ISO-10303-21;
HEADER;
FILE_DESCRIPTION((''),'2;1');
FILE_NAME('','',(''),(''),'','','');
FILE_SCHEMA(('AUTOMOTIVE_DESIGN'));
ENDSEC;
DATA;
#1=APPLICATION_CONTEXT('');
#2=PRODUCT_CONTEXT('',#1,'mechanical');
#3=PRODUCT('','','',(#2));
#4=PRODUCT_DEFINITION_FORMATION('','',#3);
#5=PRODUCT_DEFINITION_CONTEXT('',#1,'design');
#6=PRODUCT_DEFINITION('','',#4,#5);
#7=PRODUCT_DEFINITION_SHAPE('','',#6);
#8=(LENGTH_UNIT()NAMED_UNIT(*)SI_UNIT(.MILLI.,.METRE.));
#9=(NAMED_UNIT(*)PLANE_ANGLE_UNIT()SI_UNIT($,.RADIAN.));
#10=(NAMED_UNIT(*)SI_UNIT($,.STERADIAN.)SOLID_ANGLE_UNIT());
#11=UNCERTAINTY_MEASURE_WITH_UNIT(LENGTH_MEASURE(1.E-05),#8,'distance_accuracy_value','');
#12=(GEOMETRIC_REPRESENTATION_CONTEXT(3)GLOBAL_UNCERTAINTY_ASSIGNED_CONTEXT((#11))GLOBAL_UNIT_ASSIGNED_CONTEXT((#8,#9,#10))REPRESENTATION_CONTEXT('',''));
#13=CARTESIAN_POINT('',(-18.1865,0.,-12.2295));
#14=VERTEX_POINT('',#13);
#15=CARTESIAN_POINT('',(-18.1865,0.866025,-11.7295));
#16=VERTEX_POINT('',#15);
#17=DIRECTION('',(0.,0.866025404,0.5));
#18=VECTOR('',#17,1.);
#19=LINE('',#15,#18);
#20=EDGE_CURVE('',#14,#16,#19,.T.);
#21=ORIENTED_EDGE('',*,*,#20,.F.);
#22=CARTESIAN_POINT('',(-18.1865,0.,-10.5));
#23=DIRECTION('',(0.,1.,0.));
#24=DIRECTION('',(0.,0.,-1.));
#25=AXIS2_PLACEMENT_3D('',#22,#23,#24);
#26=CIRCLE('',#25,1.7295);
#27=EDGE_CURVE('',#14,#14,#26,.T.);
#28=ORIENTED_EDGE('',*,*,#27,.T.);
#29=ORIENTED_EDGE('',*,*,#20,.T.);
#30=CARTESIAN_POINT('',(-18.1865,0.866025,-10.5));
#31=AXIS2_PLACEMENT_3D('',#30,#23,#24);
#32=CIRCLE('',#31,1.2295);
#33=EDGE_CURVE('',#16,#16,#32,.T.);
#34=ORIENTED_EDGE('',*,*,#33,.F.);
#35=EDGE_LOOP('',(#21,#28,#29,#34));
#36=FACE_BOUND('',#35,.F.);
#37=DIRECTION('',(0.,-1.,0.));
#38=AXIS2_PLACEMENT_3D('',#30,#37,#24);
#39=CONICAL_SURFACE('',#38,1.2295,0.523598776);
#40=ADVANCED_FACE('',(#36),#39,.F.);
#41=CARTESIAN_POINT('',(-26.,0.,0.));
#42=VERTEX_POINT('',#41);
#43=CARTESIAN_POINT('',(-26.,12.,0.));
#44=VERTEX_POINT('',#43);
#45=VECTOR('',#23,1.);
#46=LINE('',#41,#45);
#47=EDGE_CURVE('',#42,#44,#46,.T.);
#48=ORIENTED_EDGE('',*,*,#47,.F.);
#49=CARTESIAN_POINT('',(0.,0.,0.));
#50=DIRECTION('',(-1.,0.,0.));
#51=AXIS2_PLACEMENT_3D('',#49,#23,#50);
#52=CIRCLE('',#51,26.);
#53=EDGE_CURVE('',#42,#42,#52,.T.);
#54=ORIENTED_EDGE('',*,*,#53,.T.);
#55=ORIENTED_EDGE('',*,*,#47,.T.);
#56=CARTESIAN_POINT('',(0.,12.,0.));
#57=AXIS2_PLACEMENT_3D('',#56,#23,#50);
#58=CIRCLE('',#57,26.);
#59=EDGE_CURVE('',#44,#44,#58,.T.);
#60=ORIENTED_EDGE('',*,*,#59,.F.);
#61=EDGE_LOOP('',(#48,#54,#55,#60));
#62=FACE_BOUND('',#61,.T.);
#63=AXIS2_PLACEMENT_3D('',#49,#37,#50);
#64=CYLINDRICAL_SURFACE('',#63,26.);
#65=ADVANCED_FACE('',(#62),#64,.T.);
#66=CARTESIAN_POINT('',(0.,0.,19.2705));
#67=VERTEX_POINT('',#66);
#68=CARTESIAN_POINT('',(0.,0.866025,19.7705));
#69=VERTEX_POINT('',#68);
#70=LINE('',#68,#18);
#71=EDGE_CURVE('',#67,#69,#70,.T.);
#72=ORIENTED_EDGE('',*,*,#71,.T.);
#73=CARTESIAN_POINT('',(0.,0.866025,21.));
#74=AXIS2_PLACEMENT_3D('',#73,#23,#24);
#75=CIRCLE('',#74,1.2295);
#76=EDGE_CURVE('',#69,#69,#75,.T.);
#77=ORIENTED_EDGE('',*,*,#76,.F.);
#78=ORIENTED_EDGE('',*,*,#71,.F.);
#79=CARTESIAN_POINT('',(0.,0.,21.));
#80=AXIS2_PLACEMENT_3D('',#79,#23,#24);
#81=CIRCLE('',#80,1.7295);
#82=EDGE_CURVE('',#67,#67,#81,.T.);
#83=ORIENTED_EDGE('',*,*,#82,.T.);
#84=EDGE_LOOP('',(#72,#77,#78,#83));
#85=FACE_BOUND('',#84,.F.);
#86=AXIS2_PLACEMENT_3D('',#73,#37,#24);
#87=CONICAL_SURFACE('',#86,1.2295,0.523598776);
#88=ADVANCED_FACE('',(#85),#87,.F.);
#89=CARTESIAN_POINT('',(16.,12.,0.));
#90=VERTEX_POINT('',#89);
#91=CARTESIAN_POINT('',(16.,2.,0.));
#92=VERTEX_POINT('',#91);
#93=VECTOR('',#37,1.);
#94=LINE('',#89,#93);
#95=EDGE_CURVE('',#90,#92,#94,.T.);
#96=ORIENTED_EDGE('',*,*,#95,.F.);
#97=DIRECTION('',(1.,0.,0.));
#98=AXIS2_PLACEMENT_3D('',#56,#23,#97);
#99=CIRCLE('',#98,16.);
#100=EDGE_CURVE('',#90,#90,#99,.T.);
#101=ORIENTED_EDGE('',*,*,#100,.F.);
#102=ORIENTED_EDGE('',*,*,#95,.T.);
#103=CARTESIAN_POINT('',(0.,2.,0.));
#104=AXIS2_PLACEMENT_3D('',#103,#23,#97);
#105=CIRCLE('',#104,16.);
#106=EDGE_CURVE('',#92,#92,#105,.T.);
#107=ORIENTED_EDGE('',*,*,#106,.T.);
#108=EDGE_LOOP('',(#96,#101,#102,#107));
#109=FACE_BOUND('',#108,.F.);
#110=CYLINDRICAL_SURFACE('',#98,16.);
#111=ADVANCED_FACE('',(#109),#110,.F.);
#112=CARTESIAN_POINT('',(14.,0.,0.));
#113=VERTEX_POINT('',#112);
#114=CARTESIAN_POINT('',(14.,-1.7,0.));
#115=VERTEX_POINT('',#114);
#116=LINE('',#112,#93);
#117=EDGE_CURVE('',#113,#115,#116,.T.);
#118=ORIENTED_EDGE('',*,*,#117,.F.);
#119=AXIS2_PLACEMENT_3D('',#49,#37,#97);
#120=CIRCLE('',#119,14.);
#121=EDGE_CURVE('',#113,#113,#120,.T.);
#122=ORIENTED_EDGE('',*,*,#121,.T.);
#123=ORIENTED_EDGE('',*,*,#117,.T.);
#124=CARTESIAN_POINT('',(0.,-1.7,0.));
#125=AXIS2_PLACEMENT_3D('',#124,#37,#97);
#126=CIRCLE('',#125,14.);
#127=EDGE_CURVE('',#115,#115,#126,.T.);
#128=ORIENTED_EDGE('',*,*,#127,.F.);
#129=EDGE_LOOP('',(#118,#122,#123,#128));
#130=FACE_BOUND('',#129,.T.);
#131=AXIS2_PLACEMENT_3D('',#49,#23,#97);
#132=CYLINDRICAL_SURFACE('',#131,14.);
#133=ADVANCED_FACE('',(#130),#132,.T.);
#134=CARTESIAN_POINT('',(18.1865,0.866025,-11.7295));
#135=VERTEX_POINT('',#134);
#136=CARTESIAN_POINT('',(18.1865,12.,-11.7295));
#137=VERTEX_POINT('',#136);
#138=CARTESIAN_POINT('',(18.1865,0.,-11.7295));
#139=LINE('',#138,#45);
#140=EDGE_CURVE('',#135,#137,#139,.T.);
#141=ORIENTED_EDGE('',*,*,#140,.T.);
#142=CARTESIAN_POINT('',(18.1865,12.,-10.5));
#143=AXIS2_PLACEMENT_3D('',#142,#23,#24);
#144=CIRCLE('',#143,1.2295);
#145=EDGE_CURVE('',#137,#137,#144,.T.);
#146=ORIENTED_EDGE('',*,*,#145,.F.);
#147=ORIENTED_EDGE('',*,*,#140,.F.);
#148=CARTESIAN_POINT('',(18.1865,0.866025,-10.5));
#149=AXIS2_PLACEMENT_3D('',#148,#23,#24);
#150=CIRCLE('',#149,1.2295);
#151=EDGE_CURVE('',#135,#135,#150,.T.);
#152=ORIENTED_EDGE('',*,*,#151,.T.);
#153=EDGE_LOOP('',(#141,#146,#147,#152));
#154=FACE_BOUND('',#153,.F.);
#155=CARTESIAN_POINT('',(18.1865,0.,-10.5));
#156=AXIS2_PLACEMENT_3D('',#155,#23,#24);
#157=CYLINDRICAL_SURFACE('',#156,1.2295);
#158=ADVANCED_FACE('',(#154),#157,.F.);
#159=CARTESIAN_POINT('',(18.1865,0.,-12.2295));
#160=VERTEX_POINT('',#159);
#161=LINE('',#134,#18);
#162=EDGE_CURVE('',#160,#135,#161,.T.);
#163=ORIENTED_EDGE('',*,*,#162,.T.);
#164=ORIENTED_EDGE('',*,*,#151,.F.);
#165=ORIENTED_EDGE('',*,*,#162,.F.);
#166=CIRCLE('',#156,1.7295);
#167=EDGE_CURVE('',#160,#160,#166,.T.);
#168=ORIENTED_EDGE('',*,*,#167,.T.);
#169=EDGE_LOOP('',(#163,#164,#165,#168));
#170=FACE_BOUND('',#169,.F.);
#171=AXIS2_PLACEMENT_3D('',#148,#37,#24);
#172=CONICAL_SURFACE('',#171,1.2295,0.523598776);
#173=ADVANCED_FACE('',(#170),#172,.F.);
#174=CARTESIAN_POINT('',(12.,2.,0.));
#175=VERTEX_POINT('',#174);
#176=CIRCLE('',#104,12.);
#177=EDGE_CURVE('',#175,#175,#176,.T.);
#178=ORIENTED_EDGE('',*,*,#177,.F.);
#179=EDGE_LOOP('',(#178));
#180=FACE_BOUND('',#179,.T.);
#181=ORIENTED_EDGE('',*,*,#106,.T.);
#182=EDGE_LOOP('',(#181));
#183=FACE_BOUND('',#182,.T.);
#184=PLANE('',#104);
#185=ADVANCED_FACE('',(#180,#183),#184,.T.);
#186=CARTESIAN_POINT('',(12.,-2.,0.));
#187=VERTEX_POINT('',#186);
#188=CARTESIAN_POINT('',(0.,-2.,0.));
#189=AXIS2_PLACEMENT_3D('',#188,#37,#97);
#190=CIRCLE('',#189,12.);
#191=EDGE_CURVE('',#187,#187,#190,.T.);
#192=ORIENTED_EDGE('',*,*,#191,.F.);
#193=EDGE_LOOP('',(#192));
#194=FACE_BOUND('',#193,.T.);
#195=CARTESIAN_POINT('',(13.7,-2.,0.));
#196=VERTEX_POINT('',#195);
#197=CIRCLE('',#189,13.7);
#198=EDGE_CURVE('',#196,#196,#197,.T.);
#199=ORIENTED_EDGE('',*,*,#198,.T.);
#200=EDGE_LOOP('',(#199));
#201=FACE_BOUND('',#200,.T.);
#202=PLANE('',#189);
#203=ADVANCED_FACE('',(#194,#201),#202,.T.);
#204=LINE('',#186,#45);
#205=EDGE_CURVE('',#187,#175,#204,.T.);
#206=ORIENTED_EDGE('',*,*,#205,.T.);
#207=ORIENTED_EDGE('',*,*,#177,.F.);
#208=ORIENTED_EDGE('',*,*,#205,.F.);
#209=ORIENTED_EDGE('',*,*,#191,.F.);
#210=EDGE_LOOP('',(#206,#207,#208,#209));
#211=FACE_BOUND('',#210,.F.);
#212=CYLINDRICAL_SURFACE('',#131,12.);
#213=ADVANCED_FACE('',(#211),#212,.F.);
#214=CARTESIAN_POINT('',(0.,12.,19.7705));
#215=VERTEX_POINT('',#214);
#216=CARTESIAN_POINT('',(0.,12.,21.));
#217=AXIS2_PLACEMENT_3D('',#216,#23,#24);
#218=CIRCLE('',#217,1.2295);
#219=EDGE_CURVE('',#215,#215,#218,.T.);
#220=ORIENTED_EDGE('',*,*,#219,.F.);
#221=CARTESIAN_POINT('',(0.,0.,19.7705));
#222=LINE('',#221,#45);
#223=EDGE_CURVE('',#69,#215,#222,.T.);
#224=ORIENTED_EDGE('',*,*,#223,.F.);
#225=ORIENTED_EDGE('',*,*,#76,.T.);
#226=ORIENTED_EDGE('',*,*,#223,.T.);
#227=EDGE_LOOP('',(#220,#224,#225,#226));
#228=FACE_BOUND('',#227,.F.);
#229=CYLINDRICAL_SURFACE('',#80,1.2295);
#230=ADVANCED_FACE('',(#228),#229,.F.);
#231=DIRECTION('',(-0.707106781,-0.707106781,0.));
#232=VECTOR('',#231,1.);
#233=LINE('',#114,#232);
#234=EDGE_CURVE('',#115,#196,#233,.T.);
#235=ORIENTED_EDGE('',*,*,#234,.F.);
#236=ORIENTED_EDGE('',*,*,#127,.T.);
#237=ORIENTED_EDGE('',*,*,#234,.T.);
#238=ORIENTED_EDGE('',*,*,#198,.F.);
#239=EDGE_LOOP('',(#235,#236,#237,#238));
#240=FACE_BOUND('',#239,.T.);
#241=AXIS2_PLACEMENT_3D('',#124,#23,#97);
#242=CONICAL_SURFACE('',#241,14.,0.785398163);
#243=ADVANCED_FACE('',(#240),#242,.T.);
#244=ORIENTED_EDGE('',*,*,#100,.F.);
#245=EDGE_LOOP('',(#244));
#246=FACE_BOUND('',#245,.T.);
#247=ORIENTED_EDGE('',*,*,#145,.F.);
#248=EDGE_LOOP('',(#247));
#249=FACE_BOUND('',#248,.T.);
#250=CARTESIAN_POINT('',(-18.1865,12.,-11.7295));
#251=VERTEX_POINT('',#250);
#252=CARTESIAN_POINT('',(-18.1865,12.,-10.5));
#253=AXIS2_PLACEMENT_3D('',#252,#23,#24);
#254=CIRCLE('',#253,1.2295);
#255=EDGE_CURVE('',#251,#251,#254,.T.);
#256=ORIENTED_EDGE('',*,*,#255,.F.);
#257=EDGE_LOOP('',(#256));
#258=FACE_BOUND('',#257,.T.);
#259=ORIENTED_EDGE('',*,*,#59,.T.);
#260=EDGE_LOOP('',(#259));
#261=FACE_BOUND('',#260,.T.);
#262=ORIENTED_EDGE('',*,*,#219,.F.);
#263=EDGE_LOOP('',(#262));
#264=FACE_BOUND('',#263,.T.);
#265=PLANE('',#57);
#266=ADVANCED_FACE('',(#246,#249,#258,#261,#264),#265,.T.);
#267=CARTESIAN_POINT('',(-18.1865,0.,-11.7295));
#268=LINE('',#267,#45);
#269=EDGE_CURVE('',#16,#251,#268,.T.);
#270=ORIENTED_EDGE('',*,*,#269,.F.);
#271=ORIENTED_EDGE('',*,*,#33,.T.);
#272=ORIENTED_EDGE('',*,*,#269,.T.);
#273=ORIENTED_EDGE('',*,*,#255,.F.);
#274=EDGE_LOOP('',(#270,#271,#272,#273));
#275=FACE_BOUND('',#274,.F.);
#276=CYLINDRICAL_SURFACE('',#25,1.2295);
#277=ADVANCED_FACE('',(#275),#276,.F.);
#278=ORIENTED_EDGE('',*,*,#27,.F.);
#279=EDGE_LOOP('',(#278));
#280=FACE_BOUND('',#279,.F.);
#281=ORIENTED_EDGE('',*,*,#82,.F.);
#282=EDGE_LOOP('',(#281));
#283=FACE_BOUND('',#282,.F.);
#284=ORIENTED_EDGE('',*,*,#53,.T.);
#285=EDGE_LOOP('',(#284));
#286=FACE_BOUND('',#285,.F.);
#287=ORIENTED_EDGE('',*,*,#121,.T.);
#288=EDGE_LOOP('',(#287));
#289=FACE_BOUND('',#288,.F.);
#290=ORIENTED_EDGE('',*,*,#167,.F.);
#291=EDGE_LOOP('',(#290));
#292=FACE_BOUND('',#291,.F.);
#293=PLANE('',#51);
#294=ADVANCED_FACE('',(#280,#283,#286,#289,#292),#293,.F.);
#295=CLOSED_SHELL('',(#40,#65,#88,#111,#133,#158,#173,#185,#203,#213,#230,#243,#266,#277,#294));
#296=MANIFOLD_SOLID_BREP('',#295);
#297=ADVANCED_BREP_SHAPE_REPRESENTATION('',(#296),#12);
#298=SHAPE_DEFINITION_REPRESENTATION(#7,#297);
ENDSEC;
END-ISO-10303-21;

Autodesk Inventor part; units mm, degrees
ref_plane "YZ Plane" through (0, 0, 0) normal (1, 0, 0) x (0, 1, 0)
ref_plane "XZ Plane" through (0, 0, 0) normal (0, 1, 0) x (-1, 0, 0)
ref_plane "XY Plane" through (0, 0, 0) normal (0, 0, 1) x (1, 0, 0)
sketch "Sketch1" plane through (0, 0, 0) normal (0, 1, 0) x (-1, 0, 0)
  circle A0 centre (0, 0) radius 26
  dimension "d0" = 52
extrude "Extrusion1" add sketch "Sketch1" along normal blind 12
sketch "Sketch2" plane through (0, 12, 0) normal (0, 1, 0) x (1, 0, 0)
  circle A0 centre (0, 0) radius 16
  dimension "d3" = 32
extrude "Extrusion2" cut sketch "Sketch2" against normal blind 10
sketch "Sketch3" plane through (0, 2, 0) normal (0, 1, 0) x (1, 0, 0)
  circle A0 centre (0, 0) radius 12
  dimension "d6" = 24
extrude "Extrusion3" cut sketch "Sketch3" against normal through all
sketch "Sketch4" plane through (0, 0, 0) normal (0, -1, 0) x (1, 0, 0)
  circle A0 centre (0, 0) radius 14
  circle A1 centre (0, 0) radius 12 projected
  dimension "d9" = 2
extrude "Extrusion4" add sketch "Sketch4" along normal blind 2
sketch "Sketch5" plane through (0, 0, 0) normal (0, -1, 0) x (1, 0, 0)
  circle A0 centre (0, 0) radius 16 projected
  circle A1 centre (0, 0) radius 16 projected
  circle A2 centre (0, 0) radius 26 projected
  circle A3 centre (0, 0) radius 21 construction
  line L0 (0, 36.4) -> (0, -36.4) construction
  point P0 (0, 21)
  point P1 (-18.1865, -10.5)
  point P2 (18.1865, -10.5)
  dimension "d12" = 5
  dimension "d15" = 360
hole "Hole1" at (0, 0, 21) at (-18.1865, 0, -10.5) at (18.1865, 0, -10.5) direction (0, 1, 0) diameter 2.459 end through all thread size "M3x0.5" class "6H" standard "ISO Metric profile"
chamfer "Chamfer1" distance 0.5 angle 60 3 edges at (0, 0, 22.2295) (-18.1865, 0, -9.2705) (18.1865, 0, -9.2705) measured on face at (-13.3646, 0, -14.7799)
chamfer "Chamfer2" distance 0.3 angle 45 1 edges at (-14, -2, 0)
properties part number "ball bearing mount"
